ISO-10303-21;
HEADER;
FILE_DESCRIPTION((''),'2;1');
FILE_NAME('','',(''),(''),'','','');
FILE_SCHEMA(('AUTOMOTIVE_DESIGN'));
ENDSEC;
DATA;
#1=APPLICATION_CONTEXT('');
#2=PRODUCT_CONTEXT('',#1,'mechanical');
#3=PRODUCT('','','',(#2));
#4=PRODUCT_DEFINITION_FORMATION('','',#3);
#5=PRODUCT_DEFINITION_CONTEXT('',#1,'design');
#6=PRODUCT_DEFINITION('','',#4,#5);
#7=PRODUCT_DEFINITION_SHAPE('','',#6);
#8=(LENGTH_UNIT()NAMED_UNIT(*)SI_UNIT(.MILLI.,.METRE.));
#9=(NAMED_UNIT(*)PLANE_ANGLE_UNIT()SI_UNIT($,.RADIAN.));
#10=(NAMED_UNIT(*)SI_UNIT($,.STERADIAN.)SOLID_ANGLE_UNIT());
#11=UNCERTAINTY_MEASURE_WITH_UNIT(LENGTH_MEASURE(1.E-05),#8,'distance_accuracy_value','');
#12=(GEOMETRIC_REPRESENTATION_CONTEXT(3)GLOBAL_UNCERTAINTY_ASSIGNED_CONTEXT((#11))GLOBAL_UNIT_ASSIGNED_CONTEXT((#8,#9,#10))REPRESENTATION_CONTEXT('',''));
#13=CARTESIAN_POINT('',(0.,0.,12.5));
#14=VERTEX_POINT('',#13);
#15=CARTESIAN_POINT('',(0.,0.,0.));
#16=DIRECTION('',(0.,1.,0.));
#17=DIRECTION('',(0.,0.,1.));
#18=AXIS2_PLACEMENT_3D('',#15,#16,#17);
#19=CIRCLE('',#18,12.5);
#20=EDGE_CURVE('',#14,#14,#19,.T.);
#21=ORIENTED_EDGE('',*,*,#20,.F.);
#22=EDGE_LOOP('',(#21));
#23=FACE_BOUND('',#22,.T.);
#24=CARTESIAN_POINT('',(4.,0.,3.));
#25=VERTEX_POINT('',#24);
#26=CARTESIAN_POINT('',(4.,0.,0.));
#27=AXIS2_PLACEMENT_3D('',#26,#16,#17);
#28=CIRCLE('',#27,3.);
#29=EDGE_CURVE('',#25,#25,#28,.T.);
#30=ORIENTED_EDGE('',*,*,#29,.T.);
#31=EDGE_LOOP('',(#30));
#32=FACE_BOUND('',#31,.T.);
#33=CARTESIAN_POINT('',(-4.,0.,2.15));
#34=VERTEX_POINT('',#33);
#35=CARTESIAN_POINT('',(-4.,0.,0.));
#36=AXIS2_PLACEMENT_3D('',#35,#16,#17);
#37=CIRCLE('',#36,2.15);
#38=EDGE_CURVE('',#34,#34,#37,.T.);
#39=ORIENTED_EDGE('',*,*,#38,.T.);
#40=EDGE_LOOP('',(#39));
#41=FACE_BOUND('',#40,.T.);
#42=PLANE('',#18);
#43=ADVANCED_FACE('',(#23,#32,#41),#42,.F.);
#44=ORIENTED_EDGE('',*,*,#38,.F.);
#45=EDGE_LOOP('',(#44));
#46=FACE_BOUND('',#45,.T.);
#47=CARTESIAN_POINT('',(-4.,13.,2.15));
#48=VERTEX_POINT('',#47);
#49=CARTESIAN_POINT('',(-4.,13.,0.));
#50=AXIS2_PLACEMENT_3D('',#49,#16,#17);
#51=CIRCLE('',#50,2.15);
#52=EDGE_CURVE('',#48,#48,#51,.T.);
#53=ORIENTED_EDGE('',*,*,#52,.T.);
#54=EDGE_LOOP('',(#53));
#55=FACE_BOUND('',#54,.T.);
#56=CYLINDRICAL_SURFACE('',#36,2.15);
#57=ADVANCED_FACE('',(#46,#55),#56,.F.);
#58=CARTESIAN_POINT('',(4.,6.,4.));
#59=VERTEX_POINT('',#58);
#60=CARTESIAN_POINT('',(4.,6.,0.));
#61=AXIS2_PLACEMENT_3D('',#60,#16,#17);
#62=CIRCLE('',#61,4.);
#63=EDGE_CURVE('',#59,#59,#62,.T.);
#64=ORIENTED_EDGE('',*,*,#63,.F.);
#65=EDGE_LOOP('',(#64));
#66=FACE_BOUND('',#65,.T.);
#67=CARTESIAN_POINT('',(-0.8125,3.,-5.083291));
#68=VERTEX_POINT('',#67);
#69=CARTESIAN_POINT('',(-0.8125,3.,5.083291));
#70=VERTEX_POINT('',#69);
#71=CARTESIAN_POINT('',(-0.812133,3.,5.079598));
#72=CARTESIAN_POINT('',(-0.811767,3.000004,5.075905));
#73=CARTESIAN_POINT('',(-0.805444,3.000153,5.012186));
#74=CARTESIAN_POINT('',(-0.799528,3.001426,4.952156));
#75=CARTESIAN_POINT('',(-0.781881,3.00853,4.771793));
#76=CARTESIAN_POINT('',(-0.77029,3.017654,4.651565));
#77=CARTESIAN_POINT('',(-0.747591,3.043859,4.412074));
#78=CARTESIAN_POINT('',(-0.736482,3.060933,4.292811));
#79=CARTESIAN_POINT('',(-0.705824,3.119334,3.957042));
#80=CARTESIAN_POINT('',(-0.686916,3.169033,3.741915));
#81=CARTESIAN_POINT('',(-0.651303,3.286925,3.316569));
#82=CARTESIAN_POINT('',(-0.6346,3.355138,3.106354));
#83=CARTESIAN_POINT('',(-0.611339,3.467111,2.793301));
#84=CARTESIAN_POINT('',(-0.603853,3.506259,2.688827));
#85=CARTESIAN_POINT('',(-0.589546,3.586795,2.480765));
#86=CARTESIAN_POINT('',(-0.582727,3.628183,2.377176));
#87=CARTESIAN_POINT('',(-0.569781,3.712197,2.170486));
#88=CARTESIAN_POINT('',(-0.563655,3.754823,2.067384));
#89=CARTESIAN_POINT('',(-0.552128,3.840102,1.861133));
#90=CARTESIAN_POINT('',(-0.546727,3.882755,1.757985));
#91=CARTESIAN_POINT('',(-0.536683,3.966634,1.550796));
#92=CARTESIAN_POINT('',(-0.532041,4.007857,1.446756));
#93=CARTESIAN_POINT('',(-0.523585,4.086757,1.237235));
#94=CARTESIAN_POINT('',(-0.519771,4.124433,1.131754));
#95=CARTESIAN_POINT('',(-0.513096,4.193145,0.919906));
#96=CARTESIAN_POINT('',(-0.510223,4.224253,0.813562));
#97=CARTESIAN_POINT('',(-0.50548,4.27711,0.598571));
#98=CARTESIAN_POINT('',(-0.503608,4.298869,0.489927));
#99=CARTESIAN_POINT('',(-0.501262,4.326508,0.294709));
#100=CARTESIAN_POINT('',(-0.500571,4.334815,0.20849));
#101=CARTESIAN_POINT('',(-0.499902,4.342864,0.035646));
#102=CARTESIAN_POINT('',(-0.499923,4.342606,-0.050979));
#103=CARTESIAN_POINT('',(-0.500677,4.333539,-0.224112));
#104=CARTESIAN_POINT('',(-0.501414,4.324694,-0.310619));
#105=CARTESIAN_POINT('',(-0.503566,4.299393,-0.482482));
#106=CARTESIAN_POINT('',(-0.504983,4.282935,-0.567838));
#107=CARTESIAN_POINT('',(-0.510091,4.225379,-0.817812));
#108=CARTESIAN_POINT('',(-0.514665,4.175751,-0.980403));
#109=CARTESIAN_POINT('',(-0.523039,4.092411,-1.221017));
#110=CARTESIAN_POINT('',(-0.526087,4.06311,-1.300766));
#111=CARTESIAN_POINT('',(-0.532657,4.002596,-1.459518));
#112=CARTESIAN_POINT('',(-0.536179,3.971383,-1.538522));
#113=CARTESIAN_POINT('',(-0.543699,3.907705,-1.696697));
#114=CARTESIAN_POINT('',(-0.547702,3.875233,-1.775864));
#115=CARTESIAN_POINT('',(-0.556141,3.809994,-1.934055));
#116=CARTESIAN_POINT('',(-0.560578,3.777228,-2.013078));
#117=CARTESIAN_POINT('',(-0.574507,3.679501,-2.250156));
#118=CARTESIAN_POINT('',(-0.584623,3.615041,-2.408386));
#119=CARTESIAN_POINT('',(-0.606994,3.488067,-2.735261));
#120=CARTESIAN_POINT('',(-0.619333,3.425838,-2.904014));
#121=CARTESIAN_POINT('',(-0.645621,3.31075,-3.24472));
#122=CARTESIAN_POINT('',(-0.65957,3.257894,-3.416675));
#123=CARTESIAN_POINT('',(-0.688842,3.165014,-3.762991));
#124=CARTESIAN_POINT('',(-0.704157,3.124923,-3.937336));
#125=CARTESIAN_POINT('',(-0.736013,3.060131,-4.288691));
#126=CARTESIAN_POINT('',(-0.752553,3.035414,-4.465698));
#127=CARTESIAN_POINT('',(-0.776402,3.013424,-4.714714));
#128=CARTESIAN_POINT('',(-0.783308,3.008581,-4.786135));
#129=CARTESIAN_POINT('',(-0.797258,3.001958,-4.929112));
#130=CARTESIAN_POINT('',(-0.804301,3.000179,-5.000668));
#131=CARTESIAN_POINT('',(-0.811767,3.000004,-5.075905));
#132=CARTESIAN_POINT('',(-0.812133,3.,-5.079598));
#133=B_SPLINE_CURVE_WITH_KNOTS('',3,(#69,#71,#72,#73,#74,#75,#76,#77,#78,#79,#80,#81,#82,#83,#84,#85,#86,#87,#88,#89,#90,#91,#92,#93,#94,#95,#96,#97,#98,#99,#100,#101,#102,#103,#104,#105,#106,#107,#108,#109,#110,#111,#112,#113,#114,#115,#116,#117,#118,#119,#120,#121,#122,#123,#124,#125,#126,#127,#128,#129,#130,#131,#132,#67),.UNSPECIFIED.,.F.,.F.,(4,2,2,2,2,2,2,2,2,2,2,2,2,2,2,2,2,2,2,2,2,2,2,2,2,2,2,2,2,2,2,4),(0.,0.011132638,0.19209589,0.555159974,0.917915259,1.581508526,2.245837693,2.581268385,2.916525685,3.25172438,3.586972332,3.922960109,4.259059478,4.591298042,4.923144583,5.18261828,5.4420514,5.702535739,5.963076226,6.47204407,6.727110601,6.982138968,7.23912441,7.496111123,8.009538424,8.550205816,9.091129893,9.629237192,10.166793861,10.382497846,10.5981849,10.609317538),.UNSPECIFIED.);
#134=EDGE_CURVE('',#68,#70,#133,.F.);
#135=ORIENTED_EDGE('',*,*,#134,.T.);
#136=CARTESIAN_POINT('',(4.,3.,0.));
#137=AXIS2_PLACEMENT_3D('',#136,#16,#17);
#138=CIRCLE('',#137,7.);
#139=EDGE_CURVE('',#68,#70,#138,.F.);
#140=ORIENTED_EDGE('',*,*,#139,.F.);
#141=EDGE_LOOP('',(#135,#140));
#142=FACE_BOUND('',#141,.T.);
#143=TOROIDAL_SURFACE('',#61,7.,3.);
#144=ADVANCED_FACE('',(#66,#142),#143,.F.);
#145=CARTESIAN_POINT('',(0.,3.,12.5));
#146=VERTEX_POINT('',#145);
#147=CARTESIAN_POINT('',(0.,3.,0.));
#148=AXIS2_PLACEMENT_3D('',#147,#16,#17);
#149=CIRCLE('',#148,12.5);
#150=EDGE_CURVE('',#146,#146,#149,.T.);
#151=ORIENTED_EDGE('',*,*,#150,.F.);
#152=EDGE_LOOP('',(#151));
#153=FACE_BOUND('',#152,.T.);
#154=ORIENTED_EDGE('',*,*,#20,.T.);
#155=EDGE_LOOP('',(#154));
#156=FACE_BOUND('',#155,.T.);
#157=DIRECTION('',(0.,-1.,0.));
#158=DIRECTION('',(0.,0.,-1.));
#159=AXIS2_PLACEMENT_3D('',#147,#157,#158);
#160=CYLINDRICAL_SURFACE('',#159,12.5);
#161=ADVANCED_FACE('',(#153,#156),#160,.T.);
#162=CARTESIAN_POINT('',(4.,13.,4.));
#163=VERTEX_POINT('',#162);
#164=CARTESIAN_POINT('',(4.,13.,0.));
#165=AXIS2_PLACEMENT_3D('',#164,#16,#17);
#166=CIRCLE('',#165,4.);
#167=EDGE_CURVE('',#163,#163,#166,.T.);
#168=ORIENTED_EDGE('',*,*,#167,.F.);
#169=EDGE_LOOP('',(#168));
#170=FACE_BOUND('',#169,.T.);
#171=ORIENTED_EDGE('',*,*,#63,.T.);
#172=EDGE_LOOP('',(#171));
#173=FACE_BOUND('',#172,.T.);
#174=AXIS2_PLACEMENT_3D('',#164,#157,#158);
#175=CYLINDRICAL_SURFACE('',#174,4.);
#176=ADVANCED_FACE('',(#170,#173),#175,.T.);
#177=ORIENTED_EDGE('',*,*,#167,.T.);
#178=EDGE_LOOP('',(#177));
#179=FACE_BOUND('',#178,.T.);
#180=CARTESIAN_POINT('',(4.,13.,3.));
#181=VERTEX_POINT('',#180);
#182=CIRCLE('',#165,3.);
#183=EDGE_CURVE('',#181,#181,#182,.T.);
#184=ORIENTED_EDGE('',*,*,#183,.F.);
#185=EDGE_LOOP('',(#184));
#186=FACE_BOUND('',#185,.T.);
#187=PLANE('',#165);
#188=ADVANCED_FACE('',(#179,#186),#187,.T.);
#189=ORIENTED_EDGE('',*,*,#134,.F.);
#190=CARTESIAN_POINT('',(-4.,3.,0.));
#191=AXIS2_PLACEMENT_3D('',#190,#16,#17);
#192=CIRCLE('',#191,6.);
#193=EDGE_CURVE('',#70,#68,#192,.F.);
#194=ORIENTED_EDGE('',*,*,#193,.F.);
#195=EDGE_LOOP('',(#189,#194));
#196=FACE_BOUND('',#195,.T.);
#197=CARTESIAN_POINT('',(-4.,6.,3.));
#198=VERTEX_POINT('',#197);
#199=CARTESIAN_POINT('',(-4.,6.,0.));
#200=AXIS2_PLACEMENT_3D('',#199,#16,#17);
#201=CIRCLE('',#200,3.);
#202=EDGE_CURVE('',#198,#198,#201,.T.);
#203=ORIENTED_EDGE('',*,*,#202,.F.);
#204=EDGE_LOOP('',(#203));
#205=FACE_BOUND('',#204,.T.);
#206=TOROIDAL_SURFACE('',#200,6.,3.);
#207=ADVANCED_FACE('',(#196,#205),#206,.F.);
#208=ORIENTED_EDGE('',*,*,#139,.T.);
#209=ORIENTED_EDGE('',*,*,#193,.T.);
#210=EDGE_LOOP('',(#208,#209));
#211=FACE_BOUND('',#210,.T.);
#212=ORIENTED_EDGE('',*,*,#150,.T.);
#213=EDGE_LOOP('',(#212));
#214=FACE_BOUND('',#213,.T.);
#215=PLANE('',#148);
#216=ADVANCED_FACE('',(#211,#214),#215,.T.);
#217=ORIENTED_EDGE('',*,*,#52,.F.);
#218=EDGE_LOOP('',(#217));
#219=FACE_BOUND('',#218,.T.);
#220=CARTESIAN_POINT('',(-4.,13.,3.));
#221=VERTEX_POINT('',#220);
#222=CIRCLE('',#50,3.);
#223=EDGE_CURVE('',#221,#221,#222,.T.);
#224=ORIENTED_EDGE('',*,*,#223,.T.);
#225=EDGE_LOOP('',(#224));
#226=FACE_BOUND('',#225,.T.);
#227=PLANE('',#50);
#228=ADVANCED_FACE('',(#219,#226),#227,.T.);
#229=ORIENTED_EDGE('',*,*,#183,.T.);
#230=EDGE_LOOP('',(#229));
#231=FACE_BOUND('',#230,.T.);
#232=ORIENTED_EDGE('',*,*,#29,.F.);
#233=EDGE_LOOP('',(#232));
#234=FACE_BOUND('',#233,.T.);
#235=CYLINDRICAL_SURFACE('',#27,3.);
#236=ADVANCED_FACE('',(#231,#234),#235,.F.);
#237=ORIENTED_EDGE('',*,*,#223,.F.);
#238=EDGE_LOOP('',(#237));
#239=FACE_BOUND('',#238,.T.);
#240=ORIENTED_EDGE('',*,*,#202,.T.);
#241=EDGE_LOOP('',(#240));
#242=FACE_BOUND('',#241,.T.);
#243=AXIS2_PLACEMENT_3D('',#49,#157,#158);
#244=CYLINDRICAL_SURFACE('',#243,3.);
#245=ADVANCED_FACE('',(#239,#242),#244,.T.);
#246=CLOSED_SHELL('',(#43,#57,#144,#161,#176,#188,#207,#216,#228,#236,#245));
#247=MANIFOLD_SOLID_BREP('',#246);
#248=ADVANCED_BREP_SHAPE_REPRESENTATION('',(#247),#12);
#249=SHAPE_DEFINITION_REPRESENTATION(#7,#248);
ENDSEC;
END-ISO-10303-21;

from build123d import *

# Parameters (mm, degrees)
SKETCH1_R           = 12.5
BOSS_EXTRUDE1_DEPTH = 3
SKETCH2_R           = 4
SKETCH2_R_2         = 3
BOSS_EXTRUDE2_DEPTH = 10
SKETCH3_R           = 2.15
SKETCH3_R_2         = 3
CUT_EXTRUDE1_DEPTH  = 22.943108257
FILLET1_R           = 3


with BuildPart() as part:
    # Sketch1 → Boss-Extrude1 (new body)
    with BuildSketch(Plane(origin=(0, 0, 0), x_dir=(1, 0, 0), z_dir=(0, 1, 0))):
        with Locations(Location((0, 0, 0), (0, 0, 270))):
            Circle(SKETCH1_R)
    extrude(amount=BOSS_EXTRUDE1_DEPTH)

    # Sketch2 → Boss-Extrude2 (add)
    with BuildSketch(Plane(origin=(0, 3, 0), x_dir=(1, 0, 0), z_dir=(0, 1, 0))):
        with Locations(Location((4, 0, 0), (0, 0, 270))):
            Circle(SKETCH2_R)
        with Locations(Location((-4, 0, 0), (0, 0, 270))):
            Circle(SKETCH2_R_2)
    extrude(amount=BOSS_EXTRUDE2_DEPTH)

    # Sketch3 → Cut-Extrude1 (cut, through all)
    with BuildSketch(Plane(origin=(0, 13, 0), x_dir=(1, 0, 0), z_dir=(0, 1, 0))):
        with Locations(Location((-4, 0, 0), (0, 0, 270))):
            Circle(SKETCH3_R)
        with Locations(Location((4, 0, 0), (0, 0, 270))):
            Circle(SKETCH3_R_2)
    extrude(amount=-CUT_EXTRUDE1_DEPTH, mode=Mode.SUBTRACT)

    # Fillet1
    # the kernel refuses this fillet: 3 mm, written as the material it adds along each edge
    with BuildSketch(Plane(origin=(4, 3, 0), x_dir=(0, 0, 1), z_dir=(-1, 0, 0))) as fillet1_piece_1_section:
        with BuildLine():
            CenterArc((4 + FILLET1_R, FILLET1_R), FILLET1_R, 180, 90)
            Line((4, FILLET1_R), (4, 0))
            Line((4, 0), (4 + FILLET1_R, 0))
        make_face()
    fillet1_piece_1 = revolve(axis=Axis((4, 3, 0), (0, 1, 0)), mode=Mode.PRIVATE)
    fillet1_piece_1 = fillet1_piece_1 - Plane(origin=(-4, 3.851709764, 0), x_dir=(0, 0, 1), z_dir=(0, -1, 0)) * Cylinder(3, 29, mode=Mode.PRIVATE)
    add(fillet1_piece_1)
    with BuildSketch(Plane(origin=(-4, 3, 0), x_dir=(0, 0, 1), z_dir=(-1, 0, 0))) as fillet1_piece_2_section:
        with BuildLine():
            CenterArc((3 + FILLET1_R, FILLET1_R), FILLET1_R, 180, 90)
            Line((3, FILLET1_R), (3, 0))
            Line((3, 0), (3 + FILLET1_R, 0))
        make_face()
    fillet1_piece_2 = revolve(axis=Axis((-4, 3, 0), (0, 1, 0)), mode=Mode.PRIVATE)
    fillet1_piece_2 = fillet1_piece_2 - Plane(origin=(4, 3.853854746, 0), x_dir=(0, 0, 1), z_dir=(0, -1, 0)) * Cylinder(4, 24, mode=Mode.PRIVATE)
    add(fillet1_piece_2)


solid = part.part
